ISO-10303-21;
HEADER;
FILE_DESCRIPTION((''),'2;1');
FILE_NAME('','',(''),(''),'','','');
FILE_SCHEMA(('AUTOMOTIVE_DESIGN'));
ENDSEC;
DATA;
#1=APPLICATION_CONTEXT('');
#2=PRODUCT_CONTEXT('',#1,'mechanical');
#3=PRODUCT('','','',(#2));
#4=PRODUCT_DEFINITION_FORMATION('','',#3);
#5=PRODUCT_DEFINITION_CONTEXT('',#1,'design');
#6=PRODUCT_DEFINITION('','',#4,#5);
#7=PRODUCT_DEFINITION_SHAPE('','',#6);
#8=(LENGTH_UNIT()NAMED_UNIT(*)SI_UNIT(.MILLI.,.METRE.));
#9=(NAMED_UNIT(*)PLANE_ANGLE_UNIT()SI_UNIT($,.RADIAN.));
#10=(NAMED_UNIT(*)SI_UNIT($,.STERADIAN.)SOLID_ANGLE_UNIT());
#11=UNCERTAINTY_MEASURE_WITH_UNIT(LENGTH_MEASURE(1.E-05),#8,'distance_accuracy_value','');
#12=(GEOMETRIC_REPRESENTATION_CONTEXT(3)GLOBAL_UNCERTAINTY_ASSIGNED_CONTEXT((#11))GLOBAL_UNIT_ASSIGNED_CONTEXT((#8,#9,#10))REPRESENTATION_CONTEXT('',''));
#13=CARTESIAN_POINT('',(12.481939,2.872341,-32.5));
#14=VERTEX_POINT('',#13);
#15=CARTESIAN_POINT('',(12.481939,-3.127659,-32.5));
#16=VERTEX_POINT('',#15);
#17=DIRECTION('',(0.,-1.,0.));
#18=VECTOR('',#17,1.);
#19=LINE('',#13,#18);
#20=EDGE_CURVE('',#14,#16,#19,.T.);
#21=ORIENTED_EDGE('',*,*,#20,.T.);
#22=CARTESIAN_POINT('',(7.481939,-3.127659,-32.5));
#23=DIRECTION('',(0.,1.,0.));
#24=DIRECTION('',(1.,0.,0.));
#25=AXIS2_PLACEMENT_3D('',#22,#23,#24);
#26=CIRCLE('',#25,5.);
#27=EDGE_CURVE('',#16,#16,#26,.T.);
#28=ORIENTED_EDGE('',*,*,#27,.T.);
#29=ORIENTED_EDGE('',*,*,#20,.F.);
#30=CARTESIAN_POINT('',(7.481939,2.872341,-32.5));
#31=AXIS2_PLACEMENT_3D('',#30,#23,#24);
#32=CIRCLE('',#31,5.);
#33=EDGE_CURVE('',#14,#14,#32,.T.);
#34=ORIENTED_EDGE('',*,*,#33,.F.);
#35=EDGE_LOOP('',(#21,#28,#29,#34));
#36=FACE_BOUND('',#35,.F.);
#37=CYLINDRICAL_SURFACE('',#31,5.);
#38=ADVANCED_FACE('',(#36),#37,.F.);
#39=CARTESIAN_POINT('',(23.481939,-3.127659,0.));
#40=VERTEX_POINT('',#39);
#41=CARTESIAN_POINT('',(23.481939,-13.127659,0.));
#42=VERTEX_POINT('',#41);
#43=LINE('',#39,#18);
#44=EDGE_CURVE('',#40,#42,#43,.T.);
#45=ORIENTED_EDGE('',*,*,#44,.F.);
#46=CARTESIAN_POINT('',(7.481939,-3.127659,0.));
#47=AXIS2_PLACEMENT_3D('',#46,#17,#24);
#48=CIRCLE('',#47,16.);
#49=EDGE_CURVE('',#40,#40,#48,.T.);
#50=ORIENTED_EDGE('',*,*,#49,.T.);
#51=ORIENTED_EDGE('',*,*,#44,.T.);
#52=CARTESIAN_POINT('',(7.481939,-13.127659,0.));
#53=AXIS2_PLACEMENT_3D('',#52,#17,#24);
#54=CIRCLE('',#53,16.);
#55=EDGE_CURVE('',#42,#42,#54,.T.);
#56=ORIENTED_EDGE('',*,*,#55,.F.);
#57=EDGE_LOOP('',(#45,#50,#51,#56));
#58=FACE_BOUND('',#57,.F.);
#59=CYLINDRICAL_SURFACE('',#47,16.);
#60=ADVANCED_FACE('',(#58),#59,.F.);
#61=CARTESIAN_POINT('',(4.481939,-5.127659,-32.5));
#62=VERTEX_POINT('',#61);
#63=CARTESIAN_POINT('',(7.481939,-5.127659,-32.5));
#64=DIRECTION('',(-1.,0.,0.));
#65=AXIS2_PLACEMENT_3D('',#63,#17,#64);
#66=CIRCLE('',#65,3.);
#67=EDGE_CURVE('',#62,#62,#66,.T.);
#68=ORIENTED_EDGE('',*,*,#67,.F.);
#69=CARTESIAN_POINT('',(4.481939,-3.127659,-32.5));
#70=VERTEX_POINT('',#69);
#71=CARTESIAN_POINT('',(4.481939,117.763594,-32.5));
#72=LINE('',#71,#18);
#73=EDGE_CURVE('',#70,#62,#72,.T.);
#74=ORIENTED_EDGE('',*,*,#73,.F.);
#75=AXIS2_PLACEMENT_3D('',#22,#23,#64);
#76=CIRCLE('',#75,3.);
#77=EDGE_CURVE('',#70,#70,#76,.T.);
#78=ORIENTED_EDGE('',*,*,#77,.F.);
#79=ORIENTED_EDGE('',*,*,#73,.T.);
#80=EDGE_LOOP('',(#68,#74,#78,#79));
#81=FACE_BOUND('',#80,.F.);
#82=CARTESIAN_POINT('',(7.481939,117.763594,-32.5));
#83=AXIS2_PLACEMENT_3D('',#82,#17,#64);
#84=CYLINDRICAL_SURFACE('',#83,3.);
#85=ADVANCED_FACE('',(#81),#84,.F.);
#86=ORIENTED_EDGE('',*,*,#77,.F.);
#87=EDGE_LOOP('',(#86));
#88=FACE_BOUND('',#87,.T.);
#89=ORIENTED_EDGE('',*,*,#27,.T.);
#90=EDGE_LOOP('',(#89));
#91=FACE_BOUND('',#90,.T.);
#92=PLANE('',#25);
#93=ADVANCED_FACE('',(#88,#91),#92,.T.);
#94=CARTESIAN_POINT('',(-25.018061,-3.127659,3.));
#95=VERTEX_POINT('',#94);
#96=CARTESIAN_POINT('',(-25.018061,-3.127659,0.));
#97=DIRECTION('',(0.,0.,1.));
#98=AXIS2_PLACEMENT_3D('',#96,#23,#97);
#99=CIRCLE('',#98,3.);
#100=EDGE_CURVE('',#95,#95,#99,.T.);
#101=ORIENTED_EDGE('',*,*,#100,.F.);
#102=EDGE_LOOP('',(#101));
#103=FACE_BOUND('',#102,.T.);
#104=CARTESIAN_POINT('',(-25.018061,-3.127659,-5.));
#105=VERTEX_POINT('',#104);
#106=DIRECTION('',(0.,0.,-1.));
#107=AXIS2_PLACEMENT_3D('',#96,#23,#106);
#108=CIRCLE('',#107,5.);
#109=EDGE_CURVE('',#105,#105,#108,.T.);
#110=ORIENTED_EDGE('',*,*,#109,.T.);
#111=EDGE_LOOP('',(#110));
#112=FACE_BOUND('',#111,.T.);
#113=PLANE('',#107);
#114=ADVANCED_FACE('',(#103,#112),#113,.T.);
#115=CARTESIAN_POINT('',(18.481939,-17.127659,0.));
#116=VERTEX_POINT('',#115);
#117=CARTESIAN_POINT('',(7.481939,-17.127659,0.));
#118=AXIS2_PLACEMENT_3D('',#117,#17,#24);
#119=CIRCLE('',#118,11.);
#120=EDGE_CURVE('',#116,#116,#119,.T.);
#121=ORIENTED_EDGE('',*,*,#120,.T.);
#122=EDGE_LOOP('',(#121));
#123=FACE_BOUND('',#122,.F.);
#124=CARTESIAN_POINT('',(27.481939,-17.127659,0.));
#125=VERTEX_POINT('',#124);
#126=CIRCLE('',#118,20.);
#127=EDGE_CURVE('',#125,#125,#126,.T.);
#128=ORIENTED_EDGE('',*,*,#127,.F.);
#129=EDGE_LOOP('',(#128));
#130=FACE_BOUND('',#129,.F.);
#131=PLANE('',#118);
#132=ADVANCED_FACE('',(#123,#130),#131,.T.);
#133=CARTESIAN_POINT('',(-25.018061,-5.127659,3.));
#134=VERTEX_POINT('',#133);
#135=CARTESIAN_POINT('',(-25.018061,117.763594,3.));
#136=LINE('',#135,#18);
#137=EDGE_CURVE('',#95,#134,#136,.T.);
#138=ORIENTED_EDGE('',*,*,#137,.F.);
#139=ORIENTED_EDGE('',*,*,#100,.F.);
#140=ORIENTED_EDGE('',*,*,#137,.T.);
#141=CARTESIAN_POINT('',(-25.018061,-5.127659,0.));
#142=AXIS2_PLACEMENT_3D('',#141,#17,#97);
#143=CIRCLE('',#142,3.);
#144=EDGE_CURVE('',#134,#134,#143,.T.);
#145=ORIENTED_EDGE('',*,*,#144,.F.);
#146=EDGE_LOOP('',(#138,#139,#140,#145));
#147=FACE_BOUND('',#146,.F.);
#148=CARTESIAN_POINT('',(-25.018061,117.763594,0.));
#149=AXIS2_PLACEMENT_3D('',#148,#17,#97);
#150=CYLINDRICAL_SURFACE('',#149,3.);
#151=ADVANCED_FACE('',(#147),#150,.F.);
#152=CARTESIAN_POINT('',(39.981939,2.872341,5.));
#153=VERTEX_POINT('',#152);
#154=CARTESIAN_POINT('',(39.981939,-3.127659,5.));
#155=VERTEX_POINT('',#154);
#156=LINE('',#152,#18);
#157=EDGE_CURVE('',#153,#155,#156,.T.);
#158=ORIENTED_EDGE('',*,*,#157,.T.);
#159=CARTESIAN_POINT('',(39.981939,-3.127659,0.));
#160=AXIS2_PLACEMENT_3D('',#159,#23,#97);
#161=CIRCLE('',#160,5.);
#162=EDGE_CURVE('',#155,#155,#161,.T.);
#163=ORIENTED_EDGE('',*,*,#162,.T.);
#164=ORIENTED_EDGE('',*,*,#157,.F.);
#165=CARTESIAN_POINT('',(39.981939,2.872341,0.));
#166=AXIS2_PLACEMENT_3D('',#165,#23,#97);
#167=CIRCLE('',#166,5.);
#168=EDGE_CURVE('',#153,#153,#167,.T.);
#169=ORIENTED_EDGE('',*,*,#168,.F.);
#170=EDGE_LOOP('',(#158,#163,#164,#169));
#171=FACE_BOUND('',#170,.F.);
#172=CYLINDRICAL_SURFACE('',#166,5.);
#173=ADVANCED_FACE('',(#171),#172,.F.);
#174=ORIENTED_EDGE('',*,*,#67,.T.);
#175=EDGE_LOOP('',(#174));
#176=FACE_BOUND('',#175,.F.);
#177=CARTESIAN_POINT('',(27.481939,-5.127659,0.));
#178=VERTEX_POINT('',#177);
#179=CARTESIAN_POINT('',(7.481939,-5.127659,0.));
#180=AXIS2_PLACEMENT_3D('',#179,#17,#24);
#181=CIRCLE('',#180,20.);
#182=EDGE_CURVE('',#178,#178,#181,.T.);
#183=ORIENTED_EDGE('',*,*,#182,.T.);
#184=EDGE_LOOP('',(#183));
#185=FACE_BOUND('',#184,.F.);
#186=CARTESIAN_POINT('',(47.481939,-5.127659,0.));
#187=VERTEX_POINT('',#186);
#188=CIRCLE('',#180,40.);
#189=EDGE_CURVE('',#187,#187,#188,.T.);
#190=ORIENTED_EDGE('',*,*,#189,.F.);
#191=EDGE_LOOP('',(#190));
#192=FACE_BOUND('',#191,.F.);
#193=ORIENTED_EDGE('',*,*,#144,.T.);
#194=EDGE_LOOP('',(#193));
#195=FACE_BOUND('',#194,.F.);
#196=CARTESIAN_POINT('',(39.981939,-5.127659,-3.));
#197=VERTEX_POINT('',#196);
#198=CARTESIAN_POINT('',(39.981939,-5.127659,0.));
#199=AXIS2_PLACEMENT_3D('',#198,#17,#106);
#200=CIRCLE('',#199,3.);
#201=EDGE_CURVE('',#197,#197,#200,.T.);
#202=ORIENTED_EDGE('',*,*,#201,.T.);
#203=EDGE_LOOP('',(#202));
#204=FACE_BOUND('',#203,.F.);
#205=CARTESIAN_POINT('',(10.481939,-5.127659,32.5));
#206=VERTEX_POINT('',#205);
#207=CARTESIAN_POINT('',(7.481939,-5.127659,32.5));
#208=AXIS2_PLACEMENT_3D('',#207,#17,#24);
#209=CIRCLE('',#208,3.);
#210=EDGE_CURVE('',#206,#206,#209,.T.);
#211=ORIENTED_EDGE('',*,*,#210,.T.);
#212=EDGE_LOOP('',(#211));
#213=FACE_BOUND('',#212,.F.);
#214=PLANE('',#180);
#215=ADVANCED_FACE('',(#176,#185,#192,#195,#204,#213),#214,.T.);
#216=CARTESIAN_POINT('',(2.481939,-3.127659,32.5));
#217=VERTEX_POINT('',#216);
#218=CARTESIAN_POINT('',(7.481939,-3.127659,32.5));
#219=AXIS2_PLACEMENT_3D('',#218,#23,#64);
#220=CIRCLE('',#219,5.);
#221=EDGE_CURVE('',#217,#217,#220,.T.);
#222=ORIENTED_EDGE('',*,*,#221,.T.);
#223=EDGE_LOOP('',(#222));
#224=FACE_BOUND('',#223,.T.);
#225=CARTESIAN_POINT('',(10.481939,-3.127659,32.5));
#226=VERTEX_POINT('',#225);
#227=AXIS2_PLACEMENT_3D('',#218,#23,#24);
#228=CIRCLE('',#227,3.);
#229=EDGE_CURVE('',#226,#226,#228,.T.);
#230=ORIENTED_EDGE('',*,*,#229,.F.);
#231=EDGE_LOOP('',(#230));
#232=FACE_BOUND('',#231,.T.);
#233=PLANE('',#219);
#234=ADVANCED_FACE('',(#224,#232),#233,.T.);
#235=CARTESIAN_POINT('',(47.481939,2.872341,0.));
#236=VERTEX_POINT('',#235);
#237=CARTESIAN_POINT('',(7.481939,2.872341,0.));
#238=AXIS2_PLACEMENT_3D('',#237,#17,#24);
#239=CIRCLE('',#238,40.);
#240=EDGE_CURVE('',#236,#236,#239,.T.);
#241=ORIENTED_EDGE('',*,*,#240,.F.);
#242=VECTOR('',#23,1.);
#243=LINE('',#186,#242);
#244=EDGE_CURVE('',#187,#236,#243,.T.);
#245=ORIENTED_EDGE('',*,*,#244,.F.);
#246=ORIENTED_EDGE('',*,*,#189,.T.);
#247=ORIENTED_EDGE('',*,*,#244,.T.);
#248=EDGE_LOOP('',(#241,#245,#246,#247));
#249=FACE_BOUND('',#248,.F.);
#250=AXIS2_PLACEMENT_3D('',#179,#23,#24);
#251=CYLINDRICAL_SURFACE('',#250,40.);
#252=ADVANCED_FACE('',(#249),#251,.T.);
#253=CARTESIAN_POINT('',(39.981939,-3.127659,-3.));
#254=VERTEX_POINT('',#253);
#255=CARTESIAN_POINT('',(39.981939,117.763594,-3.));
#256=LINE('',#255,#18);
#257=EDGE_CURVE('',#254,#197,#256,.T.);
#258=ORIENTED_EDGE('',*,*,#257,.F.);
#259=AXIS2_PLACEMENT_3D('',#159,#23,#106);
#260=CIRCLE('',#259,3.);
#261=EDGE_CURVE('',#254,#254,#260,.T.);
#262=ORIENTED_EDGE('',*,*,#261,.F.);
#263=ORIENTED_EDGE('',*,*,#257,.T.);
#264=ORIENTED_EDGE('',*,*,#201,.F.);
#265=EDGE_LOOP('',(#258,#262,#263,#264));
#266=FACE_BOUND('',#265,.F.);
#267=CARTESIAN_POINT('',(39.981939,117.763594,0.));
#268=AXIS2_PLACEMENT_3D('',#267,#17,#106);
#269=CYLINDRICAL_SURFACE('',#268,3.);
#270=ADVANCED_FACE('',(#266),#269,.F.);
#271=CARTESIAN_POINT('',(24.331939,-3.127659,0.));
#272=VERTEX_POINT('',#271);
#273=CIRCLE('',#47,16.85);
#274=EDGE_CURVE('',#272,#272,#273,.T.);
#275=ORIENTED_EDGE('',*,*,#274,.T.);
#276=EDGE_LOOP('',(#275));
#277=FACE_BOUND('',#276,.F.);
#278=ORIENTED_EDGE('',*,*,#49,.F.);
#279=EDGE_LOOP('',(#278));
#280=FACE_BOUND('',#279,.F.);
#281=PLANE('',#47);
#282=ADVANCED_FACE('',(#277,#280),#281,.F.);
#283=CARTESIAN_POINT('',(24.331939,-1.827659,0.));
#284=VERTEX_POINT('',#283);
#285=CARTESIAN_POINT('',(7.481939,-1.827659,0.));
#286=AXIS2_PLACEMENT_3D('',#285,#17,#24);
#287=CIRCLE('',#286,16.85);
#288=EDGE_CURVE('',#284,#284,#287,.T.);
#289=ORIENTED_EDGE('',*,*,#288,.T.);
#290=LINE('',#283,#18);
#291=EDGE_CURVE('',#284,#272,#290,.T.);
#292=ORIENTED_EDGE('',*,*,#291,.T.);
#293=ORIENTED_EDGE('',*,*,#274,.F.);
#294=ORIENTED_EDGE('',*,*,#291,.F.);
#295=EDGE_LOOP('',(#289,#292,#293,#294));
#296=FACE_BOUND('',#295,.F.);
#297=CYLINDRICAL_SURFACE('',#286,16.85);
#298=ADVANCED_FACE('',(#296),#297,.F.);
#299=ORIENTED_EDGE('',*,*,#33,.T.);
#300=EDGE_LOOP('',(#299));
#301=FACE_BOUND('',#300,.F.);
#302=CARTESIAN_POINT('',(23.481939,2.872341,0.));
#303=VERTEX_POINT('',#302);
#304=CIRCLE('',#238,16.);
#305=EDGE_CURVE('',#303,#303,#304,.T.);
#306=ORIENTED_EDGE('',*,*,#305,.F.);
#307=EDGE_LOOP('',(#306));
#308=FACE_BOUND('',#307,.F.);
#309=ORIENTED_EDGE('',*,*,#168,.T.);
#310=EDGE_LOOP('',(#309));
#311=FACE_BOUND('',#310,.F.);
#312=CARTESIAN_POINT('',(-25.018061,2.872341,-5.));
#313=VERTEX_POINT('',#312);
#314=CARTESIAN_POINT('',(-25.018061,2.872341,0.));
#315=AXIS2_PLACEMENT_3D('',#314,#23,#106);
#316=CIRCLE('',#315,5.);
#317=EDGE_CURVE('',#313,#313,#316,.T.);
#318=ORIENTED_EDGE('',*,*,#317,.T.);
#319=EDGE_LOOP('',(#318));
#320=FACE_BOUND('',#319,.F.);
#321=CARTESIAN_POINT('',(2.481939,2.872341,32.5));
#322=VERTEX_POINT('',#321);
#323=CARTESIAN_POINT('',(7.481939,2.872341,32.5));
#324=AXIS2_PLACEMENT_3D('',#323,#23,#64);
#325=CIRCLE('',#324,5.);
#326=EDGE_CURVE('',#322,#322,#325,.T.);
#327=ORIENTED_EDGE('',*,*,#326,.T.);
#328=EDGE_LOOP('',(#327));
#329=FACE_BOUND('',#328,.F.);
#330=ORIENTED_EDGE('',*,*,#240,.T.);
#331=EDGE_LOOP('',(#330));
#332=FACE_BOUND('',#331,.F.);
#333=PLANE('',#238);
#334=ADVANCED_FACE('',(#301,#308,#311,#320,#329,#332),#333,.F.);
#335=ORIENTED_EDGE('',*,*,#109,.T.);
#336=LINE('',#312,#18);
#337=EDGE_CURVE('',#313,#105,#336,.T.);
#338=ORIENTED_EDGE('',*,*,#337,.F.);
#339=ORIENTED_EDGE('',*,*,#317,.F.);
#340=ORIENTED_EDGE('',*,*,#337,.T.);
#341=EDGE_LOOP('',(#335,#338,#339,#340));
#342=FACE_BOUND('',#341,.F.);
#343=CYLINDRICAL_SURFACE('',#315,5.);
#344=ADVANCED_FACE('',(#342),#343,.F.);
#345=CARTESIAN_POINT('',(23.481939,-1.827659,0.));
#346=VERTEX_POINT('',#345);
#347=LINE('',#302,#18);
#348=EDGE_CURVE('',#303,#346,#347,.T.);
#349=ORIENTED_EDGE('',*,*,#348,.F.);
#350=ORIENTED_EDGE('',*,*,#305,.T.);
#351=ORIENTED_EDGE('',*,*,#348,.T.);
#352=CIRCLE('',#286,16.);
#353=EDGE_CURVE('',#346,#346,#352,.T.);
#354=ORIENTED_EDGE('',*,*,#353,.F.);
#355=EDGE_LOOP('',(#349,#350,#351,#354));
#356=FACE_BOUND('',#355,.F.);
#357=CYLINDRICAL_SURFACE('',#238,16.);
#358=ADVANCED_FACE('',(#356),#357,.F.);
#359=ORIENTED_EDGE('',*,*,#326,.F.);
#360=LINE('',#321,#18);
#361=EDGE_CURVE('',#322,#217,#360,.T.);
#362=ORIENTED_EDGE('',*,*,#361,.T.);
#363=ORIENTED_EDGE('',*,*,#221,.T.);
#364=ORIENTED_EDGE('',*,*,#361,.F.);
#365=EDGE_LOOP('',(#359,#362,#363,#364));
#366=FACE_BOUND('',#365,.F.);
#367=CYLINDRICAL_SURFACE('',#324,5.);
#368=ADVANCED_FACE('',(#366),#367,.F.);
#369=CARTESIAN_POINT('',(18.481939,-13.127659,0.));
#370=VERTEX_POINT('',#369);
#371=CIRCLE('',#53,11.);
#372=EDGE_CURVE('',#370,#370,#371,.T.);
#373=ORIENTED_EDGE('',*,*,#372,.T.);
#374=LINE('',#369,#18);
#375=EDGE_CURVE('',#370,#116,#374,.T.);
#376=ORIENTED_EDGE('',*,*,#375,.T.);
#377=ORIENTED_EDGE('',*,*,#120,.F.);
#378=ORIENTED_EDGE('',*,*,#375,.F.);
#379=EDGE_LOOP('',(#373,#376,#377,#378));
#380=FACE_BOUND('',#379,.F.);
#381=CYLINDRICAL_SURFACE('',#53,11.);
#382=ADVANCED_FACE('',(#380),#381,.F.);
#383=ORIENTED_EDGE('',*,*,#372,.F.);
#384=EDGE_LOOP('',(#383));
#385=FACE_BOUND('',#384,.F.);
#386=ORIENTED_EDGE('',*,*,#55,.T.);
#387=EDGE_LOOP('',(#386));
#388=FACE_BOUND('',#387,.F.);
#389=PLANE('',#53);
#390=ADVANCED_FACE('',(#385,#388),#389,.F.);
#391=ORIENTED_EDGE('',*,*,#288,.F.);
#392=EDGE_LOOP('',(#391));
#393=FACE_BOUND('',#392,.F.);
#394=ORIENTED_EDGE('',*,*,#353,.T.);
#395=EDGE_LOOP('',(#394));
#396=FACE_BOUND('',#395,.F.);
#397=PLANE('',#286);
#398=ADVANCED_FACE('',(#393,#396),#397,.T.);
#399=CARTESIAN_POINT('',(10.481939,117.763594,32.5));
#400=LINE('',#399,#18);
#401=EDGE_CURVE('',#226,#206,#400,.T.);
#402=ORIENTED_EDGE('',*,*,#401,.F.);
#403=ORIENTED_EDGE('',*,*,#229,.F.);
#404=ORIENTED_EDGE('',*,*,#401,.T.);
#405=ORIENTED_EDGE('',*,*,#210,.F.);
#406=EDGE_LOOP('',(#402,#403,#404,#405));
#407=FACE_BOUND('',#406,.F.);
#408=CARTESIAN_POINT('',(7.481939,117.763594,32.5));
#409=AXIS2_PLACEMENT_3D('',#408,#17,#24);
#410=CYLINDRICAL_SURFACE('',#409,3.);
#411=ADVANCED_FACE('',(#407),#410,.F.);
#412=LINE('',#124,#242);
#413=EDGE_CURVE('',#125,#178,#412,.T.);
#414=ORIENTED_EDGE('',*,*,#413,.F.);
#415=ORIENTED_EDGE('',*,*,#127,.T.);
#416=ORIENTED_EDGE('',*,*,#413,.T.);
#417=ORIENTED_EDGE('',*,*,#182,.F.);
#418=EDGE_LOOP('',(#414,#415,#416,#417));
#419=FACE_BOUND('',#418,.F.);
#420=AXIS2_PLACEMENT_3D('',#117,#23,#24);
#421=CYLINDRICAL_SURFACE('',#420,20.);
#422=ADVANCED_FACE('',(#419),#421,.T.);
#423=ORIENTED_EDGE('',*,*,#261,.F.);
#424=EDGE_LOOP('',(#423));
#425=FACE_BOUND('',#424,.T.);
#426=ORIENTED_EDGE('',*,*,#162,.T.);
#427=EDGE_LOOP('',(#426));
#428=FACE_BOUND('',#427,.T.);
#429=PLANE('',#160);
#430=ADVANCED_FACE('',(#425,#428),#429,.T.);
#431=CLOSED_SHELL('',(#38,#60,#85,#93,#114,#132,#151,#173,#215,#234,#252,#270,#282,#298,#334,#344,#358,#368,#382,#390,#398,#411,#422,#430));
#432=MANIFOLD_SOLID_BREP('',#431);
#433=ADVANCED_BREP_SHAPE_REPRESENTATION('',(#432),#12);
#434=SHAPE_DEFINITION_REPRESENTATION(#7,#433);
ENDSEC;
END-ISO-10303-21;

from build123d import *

# Parameters (mm, degrees)
F3_D            = 6
F3_COPIES_COUNT = 4
F4_R            = 5
F4_R_2          = 3
F5_DEPTH        = 6
F5_COPIES_COUNT = 4


# Not quite as in the source:
# - a pattern or mirror of a feature is missing from the dataset's text; its kind, count and spacing are read off the source's solid


with BuildPart() as f1:
    # F0 (on Top) → F1 (revolve)
    with BuildSketch(Plane.XY):
        Polygon((47.481939, -5.127659), (47.481939, 2.872341), (23.481939, 2.872341), (23.481939, -1.827659), (24.331939, -1.827659), (24.331939, -3.127659), (23.481939, -3.127659), (23.481939, -13.127659), (18.481939, -13.127659), (18.481939, -17.127659), (27.481939, -17.127659), (27.481939, -5.127659), align=None)
    revolve(axis=Axis((7.481939, -6.8666535, 0), (0, -1, 0)))

    # F3 (through all)
    with Locations(Plane(origin=(0, 2.872341, 0), x_dir=(-1, 0, 0), z_dir=(0, 1, 0))):
        with Locations((-7.481939, 32.5)):
            f3 = Hole(F3_D / 2)

    # F3_copies: F3 ×4 about axis
    f3_copies_axis = Axis((7.481939, 0, 0), (0, 1, 0))
    for i in range(1, F3_COPIES_COUNT):
        add(f3.rotate(f3_copies_axis, i * 360 / F3_COPIES_COUNT), mode=Mode.SUBTRACT)

    # F4 (on face) → F5 (cut)
    with BuildSketch(Plane(origin=(0, 2.872341, 0), x_dir=(-1, 0, 0), z_dir=(0, 1, 0))):
        with Locations((-7.481939, 32.5)):
            Circle(F4_R)
        with Locations((-7.481939, 32.5)):
            Circle(F4_R_2, mode=Mode.SUBTRACT)
    f5 = extrude(amount=-F5_DEPTH, mode=Mode.SUBTRACT)

    # F5_copies: F5 ×4 about axis
    f5_copies_axis = Axis((7.481939, 0, 0), (0, 1, 0))
    for i in range(1, F5_COPIES_COUNT):
        add(f5.rotate(f5_copies_axis, i * 360 / F5_COPIES_COUNT), mode=Mode.SUBTRACT)


solid = f1.part
